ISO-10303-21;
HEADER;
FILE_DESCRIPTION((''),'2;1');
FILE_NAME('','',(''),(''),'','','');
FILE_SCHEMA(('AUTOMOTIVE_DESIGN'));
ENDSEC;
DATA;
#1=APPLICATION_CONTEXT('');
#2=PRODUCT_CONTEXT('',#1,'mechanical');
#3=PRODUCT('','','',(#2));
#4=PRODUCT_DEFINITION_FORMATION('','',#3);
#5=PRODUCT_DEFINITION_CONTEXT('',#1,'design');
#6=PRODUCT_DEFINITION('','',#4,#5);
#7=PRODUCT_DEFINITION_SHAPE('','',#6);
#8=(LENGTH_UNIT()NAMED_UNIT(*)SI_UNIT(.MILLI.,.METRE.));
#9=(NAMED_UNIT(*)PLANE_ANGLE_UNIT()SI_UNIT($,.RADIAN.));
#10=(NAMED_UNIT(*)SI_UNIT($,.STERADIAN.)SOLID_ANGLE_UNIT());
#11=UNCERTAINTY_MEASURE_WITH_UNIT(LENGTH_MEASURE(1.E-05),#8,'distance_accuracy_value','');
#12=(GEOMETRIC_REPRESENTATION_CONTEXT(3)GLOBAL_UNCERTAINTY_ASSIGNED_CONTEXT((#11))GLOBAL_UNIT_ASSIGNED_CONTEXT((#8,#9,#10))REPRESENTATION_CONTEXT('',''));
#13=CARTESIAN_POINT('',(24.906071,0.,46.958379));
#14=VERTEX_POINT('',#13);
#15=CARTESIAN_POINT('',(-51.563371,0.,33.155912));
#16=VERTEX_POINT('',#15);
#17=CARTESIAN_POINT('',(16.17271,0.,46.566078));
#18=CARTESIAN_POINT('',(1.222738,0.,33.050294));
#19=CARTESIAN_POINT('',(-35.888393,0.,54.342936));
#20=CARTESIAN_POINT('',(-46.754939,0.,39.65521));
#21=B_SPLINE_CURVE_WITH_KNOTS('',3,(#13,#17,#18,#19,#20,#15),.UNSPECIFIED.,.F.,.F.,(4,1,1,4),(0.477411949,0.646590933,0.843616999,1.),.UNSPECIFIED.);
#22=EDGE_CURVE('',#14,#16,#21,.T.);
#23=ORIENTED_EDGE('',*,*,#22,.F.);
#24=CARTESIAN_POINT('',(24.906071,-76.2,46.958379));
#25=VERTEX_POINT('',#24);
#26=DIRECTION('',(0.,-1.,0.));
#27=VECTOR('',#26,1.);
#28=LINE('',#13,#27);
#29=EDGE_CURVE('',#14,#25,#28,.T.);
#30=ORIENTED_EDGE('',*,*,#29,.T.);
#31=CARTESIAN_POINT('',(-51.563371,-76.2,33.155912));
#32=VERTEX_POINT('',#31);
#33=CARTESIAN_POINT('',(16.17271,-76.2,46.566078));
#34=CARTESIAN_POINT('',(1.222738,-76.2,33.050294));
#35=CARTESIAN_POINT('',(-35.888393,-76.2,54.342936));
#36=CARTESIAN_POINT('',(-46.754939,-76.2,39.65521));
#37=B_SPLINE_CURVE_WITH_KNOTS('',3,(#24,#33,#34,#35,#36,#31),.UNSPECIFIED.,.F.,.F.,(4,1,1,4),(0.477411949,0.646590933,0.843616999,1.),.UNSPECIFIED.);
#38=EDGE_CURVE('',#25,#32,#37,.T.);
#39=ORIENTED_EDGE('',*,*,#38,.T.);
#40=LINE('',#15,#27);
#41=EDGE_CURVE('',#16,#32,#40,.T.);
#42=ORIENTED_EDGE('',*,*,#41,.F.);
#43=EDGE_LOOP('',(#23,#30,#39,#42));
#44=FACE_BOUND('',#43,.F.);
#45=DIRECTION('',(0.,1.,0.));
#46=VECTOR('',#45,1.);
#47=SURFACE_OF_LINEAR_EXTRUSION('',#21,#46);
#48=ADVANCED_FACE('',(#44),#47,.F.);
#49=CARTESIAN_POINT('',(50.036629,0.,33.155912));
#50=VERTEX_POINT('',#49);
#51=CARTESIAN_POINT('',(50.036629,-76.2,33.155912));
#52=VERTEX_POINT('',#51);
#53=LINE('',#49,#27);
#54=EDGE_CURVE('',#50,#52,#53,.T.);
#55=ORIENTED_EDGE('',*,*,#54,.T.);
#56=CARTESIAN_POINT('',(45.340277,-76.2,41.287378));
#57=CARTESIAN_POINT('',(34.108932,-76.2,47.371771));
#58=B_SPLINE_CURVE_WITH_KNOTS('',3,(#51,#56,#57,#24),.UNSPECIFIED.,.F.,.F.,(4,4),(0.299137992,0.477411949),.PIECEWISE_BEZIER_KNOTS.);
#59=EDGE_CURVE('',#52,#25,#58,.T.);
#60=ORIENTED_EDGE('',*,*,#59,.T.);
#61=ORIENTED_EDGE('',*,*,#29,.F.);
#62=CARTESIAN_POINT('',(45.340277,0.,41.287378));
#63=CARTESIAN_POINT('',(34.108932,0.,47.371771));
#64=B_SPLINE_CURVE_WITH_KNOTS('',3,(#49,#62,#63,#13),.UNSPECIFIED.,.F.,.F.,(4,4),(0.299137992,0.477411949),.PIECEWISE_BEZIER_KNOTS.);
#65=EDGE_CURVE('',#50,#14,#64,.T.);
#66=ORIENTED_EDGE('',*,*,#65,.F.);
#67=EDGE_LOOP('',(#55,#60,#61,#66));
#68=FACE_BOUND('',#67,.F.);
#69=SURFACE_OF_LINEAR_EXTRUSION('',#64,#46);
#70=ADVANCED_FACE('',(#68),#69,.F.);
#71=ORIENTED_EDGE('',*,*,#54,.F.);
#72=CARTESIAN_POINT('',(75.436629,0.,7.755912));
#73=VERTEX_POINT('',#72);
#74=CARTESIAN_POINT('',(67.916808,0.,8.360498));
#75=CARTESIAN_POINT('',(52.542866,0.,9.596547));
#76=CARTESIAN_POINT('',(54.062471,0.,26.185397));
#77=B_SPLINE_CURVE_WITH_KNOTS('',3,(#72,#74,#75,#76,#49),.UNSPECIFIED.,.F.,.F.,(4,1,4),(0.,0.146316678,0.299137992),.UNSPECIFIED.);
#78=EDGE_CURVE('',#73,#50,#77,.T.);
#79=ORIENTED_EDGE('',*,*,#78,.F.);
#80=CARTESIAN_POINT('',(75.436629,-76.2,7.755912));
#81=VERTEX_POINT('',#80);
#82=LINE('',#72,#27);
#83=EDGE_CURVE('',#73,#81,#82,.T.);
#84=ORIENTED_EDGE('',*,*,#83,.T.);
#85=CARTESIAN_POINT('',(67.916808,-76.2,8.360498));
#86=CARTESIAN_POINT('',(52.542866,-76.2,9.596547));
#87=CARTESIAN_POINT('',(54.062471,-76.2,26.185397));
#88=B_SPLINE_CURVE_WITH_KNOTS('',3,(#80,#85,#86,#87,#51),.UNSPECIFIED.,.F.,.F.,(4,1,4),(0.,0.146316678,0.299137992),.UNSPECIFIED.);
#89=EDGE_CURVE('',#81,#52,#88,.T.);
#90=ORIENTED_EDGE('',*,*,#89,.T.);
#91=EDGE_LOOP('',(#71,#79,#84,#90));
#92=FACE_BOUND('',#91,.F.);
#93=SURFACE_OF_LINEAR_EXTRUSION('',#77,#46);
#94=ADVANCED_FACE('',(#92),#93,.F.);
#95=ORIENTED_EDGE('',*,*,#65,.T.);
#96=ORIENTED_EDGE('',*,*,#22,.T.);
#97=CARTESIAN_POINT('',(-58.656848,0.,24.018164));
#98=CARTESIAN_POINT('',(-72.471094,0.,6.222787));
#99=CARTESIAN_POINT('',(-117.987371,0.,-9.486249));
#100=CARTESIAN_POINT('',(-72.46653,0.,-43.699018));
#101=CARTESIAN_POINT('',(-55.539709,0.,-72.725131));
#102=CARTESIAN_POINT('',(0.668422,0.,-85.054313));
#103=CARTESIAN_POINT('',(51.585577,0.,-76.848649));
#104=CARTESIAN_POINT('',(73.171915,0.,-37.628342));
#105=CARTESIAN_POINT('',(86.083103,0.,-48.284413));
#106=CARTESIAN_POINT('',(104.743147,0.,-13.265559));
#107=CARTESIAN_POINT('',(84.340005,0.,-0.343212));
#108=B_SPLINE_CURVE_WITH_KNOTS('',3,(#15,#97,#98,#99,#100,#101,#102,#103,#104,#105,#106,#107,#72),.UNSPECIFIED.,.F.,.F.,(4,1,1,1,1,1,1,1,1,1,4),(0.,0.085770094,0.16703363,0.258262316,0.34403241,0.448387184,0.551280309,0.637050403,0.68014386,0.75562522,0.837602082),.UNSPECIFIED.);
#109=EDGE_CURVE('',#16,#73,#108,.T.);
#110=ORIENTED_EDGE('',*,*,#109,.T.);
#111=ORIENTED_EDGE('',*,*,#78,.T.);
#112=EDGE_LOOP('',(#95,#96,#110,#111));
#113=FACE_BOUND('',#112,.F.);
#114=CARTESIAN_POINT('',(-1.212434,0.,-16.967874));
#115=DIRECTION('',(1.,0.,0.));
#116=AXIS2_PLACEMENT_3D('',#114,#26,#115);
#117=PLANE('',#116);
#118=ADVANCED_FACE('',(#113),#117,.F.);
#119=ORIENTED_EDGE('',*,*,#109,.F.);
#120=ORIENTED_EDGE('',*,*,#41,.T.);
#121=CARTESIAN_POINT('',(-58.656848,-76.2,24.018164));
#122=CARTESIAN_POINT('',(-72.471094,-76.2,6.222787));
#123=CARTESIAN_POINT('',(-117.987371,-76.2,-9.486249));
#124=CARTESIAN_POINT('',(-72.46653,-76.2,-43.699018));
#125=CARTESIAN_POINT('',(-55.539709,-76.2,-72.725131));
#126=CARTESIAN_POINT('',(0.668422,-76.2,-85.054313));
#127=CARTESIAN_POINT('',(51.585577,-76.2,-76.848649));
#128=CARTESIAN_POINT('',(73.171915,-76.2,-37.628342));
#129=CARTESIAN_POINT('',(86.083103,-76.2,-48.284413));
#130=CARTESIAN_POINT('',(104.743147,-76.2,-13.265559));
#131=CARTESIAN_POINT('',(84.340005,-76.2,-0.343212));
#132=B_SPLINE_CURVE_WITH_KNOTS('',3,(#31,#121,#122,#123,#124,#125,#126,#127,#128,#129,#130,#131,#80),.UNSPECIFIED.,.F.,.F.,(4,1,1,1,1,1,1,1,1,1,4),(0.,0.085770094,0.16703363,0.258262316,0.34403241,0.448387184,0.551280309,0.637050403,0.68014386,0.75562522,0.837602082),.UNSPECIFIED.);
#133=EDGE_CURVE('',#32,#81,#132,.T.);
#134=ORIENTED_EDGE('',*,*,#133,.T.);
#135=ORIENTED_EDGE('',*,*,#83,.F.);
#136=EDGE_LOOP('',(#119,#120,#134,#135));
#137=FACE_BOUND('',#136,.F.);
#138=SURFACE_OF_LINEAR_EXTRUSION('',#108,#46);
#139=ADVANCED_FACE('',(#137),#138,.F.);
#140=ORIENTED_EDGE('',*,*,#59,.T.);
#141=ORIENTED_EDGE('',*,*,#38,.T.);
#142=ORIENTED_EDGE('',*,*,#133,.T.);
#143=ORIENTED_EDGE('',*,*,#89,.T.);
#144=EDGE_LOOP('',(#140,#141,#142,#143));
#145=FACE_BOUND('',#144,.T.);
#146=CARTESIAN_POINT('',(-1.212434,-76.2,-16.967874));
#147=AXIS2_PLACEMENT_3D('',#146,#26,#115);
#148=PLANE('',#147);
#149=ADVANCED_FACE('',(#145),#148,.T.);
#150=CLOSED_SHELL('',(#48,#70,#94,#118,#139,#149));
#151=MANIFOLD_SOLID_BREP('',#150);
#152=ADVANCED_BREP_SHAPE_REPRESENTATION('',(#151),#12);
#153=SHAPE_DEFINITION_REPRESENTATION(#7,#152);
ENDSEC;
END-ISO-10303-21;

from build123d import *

# Parameters (mm, degrees)
F1_DEPTH = 76.2


with BuildPart() as f1:
    # F0 (on Front) → F1 (new body)
    with BuildSketch(Plane.XZ):
        with BuildLine():
            add(Edge.make_bspline(
                [(24.9060709029, 46.9583794475), (16.1727104769, 46.5660775171), (1.2227384931, 33.0502935537), (-35.8883926105, 54.3429364547), (-46.7549393931, 39.6552097469), (-51.563370645, 33.1559118986)],
                knots=[0.4774119485, 0.4774119485, 0.4774119485, 0.4774119485, 0.6465909332, 0.8436169985, 1, 1, 1, 1], degree=3))
            add(Edge.make_bspline(
                [(-51.563370645, 33.1559118986), (-58.6568476295, 24.0181643446), (-72.471094018, 6.22278749), (-117.9873713114, -9.4862487022), (-72.4665303899, -43.6990176605), (-55.5397089554, -72.7251306361), (0.6684223402, -85.0543128637), (51.5855769231, -76.8486488178), (73.1719149378, -37.628342201), (86.0831026078, -48.2844127901), (104.7431469221, -13.2655589993), (84.3400045117, -0.34321211), (75.436629355, 7.7559118986)],
                knots=[0, 0, 0, 0, 0.0857700941, 0.1670336304, 0.2582623164, 0.3440324105, 0.4483871845, 0.551280309, 0.6370504031, 0.68014386, 0.7556252198, 0.8376020816, 0.8376020816, 0.8376020816, 0.8376020816], degree=3))
            add(Edge.make_bspline(
                [(75.436629355, 7.7559118986), (67.9168082181, 8.3604978714), (52.5428657153, 9.5965472156), (54.062471008, 26.185396649), (50.036629355, 33.1559118986)],
                knots=[0, 0, 0, 0, 0.1463166779, 0.2991379918, 0.2991379918, 0.2991379918, 0.2991379918], degree=3))
            add(Edge.make_bspline(
                [(50.036629355, 33.1559118986), (42.3076569703, 39.3659677496), (33.6068639366, 43.1621735986), (24.9060709029, 46.9583794475)],
                knots=[0.9233721757, 0.9233721757, 0.9233721757, 0.9233721757, 1, 1, 1, 1], degree=3))
        make_face()
        with BuildLine():
            add(Edge.make_bspline(
                [(50.036629355, 33.1559118986), (45.3402771089, 41.2873780041), (34.1089321341, 47.3717713207), (24.9060709029, 46.9583794475)],
                knots=[0.2991379918, 0.2991379918, 0.2991379918, 0.2991379918, 0.4774119485, 0.4774119485, 0.4774119485, 0.4774119485], degree=3))
            add(Edge.make_bspline(
                [(50.036629355, 33.1559118986), (42.3076569703, 39.3659677496), (33.6068639366, 43.1621735986), (24.9060709029, 46.9583794475)],
                knots=[0.9233721757, 0.9233721757, 0.9233721757, 0.9233721757, 1, 1, 1, 1], degree=3))
        make_face()
    extrude(amount=F1_DEPTH)


solid = f1.part
